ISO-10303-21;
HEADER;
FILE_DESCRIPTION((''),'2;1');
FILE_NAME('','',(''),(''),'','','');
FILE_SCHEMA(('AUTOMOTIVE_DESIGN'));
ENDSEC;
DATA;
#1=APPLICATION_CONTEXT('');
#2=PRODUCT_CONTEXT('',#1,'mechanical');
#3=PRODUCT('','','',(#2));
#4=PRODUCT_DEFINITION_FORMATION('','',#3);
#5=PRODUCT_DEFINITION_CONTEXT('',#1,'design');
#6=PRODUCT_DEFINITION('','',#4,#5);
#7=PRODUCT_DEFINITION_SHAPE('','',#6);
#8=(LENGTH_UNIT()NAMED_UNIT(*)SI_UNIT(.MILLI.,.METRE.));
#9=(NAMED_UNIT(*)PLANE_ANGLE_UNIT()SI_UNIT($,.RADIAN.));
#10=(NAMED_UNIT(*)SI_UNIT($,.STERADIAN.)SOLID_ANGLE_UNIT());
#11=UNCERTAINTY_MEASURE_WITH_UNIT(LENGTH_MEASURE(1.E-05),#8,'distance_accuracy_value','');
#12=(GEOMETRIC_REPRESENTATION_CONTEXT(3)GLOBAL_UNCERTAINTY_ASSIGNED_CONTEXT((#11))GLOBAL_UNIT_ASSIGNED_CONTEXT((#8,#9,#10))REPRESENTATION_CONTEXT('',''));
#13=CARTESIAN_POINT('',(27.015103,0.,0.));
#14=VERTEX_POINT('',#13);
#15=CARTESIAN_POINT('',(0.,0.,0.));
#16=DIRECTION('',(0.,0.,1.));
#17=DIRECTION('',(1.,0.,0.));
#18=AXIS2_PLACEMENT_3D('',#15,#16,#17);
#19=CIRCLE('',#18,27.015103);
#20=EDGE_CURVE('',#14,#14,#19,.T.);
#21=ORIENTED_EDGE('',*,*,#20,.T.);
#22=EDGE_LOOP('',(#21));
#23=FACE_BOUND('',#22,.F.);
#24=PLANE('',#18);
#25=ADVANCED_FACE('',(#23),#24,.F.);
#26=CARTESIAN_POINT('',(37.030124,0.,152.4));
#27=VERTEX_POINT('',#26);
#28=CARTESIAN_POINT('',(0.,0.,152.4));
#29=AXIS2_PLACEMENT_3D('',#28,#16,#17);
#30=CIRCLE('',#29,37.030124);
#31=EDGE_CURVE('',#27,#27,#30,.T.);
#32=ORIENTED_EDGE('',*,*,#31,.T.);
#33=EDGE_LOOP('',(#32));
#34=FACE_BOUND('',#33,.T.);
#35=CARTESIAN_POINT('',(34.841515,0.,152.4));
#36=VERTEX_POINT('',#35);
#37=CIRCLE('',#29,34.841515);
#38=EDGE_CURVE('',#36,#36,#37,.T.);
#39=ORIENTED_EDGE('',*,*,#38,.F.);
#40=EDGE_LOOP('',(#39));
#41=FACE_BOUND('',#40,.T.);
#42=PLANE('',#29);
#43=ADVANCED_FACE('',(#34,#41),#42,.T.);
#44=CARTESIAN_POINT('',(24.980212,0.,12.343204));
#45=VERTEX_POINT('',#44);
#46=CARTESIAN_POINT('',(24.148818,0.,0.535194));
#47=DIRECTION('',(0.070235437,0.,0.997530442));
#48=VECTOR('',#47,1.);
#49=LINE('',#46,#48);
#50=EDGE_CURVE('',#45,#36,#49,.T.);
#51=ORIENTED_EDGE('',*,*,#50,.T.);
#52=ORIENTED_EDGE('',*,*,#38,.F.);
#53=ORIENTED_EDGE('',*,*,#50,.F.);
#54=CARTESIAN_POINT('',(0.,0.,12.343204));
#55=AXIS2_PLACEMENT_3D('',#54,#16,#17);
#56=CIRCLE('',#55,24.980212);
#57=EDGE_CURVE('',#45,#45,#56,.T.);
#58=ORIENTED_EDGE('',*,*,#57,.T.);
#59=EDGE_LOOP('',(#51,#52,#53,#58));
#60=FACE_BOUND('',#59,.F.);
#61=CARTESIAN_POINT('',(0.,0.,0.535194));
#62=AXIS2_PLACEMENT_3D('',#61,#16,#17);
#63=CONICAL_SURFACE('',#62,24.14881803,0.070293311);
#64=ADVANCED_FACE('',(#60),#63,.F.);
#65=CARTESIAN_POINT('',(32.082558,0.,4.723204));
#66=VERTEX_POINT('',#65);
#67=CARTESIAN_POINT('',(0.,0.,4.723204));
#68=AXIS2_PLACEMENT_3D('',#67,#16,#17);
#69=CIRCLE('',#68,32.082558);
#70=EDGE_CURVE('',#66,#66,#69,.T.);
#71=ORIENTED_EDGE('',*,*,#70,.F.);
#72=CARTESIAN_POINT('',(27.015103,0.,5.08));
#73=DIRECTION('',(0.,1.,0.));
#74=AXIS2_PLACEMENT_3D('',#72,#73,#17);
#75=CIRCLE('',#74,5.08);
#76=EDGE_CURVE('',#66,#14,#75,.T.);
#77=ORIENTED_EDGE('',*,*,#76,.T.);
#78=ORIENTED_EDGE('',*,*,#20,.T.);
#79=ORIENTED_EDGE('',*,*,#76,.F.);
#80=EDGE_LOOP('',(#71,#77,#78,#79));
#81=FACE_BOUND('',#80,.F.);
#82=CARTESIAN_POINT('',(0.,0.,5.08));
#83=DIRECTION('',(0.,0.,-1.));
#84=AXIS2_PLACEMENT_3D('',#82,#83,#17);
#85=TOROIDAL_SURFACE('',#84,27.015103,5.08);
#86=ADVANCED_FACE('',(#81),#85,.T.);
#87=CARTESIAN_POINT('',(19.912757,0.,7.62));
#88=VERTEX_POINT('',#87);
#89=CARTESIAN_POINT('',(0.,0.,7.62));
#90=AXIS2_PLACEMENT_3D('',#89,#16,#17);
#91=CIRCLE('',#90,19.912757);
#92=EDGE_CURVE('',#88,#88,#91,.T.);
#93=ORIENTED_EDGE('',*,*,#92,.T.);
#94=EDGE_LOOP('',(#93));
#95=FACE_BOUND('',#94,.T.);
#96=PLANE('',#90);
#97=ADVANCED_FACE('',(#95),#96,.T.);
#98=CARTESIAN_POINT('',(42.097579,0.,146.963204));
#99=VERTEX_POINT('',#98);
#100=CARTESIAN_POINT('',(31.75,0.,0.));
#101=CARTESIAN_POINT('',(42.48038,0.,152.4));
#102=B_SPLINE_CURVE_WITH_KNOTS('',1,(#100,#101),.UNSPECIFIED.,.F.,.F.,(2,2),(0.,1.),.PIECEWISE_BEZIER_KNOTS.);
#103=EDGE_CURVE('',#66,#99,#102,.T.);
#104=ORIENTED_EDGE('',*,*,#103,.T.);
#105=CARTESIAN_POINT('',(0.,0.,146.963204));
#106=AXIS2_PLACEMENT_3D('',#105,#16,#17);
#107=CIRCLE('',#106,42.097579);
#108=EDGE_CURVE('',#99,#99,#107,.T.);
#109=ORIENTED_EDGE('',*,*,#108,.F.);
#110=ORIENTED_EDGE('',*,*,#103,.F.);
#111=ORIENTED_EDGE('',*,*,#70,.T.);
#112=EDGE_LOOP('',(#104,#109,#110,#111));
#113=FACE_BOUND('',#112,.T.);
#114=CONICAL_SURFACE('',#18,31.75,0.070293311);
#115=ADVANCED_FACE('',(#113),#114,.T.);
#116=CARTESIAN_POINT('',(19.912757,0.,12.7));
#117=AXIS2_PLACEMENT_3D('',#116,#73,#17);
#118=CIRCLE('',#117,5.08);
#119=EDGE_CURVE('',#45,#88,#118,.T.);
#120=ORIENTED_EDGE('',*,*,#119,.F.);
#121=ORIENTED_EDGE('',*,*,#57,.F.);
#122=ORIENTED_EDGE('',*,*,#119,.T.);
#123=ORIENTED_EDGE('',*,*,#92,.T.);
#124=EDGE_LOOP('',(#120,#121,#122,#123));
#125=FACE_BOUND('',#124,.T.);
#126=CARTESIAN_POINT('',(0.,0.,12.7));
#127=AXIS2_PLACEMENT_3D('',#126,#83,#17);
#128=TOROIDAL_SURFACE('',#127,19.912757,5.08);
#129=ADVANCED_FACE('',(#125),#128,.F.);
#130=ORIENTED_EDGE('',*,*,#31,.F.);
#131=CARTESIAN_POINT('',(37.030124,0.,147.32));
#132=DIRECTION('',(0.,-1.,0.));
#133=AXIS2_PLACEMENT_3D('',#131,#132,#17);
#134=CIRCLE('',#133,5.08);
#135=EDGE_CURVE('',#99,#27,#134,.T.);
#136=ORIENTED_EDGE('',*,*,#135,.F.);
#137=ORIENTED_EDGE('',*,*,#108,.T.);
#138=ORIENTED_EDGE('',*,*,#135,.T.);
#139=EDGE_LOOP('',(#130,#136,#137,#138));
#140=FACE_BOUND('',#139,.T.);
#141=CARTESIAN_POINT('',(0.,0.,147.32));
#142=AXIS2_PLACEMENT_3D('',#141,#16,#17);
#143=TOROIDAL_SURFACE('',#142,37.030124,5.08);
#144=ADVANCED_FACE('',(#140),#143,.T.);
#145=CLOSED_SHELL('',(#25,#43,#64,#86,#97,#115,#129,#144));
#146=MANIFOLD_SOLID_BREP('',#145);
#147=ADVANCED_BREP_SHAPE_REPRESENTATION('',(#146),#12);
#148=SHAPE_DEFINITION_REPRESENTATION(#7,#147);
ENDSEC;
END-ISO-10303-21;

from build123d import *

# Parameters (mm, degrees)
F0_R = 31.75
F2_R = 42.4803799305
F4_T = -7.62
F5_R = 5.08
F6_R = 5.08
F7_R = 5.08


with BuildPart() as f3:
    # F0 (on Top) → F3 section 0
    with BuildSketch(Plane.XY):
        Circle(F0_R)
    # F2 (on offset) → F3 section 1
    with BuildSketch(Plane.XY.offset(152.4)):
        Circle(F2_R)
    loft()

    # F4
    f4_openings = [f3.faces().sort_by_distance(p)[0] for p in [
        (0, 0, 152.4),
    ]]
    offset(amount=F4_T, openings=f4_openings, kind=Kind.INTERSECTION)

    # F5
    f5_edges = [f3.edges().sort_by_distance(p)[0] for p in [
        (-42.48038, 0, 152.4),
    ]]
    fillet(f5_edges, radius=F5_R)

    # F6
    f6_edges = [f3.edges().sort_by_distance(p)[0] for p in [
        (-31.75, 0, 0),
    ]]
    fillet(f6_edges, radius=F6_R)

    # F7
    f7_edges = [f3.edges().sort_by_distance(p)[0] for p in [
        (-24.647654, 0, 7.62),
    ]]
    fillet(f7_edges, radius=F7_R)


solid = f3.part
